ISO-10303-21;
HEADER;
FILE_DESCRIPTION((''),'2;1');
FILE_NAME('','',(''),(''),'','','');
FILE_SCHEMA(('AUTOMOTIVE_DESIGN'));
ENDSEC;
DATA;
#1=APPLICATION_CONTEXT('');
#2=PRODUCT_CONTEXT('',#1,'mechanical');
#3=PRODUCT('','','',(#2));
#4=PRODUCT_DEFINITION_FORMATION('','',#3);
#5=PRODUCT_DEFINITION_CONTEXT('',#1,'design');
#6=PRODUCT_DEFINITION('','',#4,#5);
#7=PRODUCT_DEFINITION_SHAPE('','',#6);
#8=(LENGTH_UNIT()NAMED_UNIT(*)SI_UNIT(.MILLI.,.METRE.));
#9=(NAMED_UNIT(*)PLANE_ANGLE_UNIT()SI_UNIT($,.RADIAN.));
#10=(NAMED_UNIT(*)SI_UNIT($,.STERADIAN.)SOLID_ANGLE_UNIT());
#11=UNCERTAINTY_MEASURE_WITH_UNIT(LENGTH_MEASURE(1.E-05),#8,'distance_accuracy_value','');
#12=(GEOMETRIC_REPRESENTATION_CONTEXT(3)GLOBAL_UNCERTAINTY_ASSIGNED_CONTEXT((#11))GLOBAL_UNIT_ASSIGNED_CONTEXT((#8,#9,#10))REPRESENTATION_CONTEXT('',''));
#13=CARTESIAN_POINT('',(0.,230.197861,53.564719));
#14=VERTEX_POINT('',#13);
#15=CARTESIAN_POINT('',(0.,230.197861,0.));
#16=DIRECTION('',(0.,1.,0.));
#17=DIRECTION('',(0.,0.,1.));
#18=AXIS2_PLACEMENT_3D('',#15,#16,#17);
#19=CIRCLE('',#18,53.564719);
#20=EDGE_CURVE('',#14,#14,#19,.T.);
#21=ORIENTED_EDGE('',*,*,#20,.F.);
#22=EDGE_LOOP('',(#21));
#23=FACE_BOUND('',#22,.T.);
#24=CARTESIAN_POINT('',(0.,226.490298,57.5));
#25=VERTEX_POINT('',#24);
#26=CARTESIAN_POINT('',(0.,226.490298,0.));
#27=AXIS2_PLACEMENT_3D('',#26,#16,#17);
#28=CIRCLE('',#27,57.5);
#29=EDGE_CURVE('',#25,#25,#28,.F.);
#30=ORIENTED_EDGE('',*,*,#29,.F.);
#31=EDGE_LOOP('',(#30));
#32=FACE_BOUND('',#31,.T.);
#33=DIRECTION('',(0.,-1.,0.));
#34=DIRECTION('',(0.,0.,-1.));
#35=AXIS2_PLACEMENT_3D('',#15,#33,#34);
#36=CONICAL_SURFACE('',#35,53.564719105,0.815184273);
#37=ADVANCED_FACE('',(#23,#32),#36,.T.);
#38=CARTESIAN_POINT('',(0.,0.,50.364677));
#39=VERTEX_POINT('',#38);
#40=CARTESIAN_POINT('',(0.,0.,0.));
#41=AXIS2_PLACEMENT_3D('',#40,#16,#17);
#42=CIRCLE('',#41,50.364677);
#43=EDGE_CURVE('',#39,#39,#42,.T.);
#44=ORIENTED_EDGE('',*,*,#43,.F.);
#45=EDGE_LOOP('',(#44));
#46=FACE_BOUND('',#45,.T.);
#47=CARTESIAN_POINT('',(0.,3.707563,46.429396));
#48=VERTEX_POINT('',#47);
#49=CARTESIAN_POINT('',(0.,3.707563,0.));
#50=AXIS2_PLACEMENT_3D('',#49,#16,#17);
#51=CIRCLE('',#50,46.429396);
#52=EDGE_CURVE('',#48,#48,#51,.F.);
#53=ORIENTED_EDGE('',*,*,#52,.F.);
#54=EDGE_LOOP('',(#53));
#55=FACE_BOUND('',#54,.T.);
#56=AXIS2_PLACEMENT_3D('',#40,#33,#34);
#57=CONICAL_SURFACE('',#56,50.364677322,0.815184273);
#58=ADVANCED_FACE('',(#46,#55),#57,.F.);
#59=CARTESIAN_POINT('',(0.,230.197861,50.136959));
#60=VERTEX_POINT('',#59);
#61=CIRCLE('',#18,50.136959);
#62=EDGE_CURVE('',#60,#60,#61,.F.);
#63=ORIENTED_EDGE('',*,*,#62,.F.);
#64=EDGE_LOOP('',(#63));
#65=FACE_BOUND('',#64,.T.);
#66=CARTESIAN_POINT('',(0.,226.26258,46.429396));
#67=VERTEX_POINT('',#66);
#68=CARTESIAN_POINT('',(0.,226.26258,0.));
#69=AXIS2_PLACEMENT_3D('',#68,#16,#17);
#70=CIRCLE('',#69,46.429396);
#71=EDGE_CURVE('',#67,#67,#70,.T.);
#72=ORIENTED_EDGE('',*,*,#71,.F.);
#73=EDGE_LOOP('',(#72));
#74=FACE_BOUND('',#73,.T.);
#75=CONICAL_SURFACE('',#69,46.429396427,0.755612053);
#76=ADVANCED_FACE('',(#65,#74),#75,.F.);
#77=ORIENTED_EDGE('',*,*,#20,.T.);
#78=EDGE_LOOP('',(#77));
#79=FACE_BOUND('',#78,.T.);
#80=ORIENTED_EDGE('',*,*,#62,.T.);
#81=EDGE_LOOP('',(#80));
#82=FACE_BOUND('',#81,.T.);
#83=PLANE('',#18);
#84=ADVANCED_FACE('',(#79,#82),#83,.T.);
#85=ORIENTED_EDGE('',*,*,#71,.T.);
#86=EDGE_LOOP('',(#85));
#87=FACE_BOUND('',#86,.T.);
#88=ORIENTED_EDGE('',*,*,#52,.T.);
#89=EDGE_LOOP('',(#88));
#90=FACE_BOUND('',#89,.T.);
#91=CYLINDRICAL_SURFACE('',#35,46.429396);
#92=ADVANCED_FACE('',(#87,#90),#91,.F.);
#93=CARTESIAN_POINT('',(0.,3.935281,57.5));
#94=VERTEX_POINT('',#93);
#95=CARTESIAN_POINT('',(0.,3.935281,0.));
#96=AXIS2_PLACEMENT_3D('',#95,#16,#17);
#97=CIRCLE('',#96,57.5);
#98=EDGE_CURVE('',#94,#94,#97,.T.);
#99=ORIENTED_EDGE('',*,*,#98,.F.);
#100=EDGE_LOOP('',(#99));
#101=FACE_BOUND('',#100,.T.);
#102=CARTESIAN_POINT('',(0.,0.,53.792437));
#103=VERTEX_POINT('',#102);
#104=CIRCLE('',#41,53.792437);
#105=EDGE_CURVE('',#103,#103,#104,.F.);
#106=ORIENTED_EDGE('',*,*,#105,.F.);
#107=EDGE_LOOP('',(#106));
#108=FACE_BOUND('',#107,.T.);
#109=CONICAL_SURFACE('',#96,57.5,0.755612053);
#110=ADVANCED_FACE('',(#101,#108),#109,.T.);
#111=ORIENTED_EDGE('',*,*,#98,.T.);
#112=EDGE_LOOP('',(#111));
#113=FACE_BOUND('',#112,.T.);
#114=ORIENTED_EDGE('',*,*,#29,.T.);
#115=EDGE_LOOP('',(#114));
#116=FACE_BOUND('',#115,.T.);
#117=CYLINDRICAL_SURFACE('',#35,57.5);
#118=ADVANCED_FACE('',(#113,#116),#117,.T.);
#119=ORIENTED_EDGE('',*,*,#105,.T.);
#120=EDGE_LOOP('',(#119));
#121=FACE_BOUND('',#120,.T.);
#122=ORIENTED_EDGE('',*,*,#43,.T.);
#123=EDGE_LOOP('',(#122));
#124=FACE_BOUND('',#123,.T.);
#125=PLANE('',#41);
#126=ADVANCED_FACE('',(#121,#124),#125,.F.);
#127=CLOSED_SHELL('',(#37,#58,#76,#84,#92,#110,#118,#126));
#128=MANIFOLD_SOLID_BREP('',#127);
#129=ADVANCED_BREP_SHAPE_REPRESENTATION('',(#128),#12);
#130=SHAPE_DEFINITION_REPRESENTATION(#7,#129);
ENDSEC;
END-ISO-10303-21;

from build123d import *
from OCP.BRepFilletAPI import BRepFilletAPI_MakeChamfer

# Parameters (mm, degrees)
SKETCH1_R           = 57.5
BOSS_EXTRUDE1_DEPTH = 230.197861075
SKETCH2_R           = 46.429396427
CUT_EXTRUDE1_DEPTH  = 245.138393629
CHAMFER1_SIZE       = 3.707562958
CHAMFER1_SIZE2      = 3.935280895


with BuildPart() as part:
    # Sketch1 → Boss-Extrude1 (new body)
    with BuildSketch(Plane(origin=(0, 0, 0), x_dir=(1, 0, 0), z_dir=(0, 1, 0))):
        Circle(SKETCH1_R)
    extrude(amount=BOSS_EXTRUDE1_DEPTH)

    # Sketch2 → Cut-Extrude1 (cut, through all)
    with BuildSketch(Plane(origin=(0, 0, 0), x_dir=(1, 0, 0), z_dir=(0, 1, 0))):
        Circle(SKETCH2_R)
    extrude(amount=CUT_EXTRUDE1_DEPTH, mode=Mode.SUBTRACT)

    # Chamfer1: one chamfer whose edges measure the first distance from different faces: ONE call of the kernel's chamfer builder (chamfer() names one face for all edges)
    chamfer1_edges_1 = [part.edges().sort_by_distance(p)[0] for p in [
        (-46.429396427, 230.197861075, 0),
    ]]
    chamfer1_side_1 = [part.faces().sort_by_distance(p)[0] for p in [
        (-55.873654403, 230.197861075, 0),
    ]]
    chamfer1_edges_2 = [part.edges().sort_by_distance(p)[0] for p in [
        (-46.429396427, 0, 0),
    ]]
    chamfer1_side_2 = [part.faces().sort_by_distance(p)[0] for p in [
        (-46.429396427, 115.098930538, 0),
    ]]
    chamfer1_edges_3 = [part.edges().sort_by_distance(p)[0] for p in [
        (-57.5, 0, 0),
    ]]
    chamfer1_side_3 = [part.faces().sort_by_distance(p)[0] for p in [
        (-55.873654403, 0, 0),
    ]]
    chamfer1_edges_4 = [part.edges().sort_by_distance(p)[0] for p in [
        (-57.5, 230.197861075, 0),
    ]]
    chamfer1_side_4 = [part.faces().sort_by_distance(p)[0] for p in [
        (-57.5, 115.098930538, 0),
    ]]
    chamfer1 = BRepFilletAPI_MakeChamfer(part.part.solid().wrapped)
    for e in chamfer1_edges_1:
        chamfer1.Add(CHAMFER1_SIZE, CHAMFER1_SIZE2, e.wrapped, chamfer1_side_1[0].wrapped)  # the first distance lies on this face
    for e in chamfer1_edges_2:
        chamfer1.Add(CHAMFER1_SIZE, CHAMFER1_SIZE2, e.wrapped, chamfer1_side_2[0].wrapped)  # the first distance lies on this face
    for e in chamfer1_edges_3:
        chamfer1.Add(CHAMFER1_SIZE, CHAMFER1_SIZE2, e.wrapped, chamfer1_side_3[0].wrapped)  # the first distance lies on this face
    for e in chamfer1_edges_4:
        chamfer1.Add(CHAMFER1_SIZE, CHAMFER1_SIZE2, e.wrapped, chamfer1_side_4[0].wrapped)  # the first distance lies on this face
    add(Compound.cast(chamfer1.Shape()), mode=Mode.REPLACE)


solid = part.part
